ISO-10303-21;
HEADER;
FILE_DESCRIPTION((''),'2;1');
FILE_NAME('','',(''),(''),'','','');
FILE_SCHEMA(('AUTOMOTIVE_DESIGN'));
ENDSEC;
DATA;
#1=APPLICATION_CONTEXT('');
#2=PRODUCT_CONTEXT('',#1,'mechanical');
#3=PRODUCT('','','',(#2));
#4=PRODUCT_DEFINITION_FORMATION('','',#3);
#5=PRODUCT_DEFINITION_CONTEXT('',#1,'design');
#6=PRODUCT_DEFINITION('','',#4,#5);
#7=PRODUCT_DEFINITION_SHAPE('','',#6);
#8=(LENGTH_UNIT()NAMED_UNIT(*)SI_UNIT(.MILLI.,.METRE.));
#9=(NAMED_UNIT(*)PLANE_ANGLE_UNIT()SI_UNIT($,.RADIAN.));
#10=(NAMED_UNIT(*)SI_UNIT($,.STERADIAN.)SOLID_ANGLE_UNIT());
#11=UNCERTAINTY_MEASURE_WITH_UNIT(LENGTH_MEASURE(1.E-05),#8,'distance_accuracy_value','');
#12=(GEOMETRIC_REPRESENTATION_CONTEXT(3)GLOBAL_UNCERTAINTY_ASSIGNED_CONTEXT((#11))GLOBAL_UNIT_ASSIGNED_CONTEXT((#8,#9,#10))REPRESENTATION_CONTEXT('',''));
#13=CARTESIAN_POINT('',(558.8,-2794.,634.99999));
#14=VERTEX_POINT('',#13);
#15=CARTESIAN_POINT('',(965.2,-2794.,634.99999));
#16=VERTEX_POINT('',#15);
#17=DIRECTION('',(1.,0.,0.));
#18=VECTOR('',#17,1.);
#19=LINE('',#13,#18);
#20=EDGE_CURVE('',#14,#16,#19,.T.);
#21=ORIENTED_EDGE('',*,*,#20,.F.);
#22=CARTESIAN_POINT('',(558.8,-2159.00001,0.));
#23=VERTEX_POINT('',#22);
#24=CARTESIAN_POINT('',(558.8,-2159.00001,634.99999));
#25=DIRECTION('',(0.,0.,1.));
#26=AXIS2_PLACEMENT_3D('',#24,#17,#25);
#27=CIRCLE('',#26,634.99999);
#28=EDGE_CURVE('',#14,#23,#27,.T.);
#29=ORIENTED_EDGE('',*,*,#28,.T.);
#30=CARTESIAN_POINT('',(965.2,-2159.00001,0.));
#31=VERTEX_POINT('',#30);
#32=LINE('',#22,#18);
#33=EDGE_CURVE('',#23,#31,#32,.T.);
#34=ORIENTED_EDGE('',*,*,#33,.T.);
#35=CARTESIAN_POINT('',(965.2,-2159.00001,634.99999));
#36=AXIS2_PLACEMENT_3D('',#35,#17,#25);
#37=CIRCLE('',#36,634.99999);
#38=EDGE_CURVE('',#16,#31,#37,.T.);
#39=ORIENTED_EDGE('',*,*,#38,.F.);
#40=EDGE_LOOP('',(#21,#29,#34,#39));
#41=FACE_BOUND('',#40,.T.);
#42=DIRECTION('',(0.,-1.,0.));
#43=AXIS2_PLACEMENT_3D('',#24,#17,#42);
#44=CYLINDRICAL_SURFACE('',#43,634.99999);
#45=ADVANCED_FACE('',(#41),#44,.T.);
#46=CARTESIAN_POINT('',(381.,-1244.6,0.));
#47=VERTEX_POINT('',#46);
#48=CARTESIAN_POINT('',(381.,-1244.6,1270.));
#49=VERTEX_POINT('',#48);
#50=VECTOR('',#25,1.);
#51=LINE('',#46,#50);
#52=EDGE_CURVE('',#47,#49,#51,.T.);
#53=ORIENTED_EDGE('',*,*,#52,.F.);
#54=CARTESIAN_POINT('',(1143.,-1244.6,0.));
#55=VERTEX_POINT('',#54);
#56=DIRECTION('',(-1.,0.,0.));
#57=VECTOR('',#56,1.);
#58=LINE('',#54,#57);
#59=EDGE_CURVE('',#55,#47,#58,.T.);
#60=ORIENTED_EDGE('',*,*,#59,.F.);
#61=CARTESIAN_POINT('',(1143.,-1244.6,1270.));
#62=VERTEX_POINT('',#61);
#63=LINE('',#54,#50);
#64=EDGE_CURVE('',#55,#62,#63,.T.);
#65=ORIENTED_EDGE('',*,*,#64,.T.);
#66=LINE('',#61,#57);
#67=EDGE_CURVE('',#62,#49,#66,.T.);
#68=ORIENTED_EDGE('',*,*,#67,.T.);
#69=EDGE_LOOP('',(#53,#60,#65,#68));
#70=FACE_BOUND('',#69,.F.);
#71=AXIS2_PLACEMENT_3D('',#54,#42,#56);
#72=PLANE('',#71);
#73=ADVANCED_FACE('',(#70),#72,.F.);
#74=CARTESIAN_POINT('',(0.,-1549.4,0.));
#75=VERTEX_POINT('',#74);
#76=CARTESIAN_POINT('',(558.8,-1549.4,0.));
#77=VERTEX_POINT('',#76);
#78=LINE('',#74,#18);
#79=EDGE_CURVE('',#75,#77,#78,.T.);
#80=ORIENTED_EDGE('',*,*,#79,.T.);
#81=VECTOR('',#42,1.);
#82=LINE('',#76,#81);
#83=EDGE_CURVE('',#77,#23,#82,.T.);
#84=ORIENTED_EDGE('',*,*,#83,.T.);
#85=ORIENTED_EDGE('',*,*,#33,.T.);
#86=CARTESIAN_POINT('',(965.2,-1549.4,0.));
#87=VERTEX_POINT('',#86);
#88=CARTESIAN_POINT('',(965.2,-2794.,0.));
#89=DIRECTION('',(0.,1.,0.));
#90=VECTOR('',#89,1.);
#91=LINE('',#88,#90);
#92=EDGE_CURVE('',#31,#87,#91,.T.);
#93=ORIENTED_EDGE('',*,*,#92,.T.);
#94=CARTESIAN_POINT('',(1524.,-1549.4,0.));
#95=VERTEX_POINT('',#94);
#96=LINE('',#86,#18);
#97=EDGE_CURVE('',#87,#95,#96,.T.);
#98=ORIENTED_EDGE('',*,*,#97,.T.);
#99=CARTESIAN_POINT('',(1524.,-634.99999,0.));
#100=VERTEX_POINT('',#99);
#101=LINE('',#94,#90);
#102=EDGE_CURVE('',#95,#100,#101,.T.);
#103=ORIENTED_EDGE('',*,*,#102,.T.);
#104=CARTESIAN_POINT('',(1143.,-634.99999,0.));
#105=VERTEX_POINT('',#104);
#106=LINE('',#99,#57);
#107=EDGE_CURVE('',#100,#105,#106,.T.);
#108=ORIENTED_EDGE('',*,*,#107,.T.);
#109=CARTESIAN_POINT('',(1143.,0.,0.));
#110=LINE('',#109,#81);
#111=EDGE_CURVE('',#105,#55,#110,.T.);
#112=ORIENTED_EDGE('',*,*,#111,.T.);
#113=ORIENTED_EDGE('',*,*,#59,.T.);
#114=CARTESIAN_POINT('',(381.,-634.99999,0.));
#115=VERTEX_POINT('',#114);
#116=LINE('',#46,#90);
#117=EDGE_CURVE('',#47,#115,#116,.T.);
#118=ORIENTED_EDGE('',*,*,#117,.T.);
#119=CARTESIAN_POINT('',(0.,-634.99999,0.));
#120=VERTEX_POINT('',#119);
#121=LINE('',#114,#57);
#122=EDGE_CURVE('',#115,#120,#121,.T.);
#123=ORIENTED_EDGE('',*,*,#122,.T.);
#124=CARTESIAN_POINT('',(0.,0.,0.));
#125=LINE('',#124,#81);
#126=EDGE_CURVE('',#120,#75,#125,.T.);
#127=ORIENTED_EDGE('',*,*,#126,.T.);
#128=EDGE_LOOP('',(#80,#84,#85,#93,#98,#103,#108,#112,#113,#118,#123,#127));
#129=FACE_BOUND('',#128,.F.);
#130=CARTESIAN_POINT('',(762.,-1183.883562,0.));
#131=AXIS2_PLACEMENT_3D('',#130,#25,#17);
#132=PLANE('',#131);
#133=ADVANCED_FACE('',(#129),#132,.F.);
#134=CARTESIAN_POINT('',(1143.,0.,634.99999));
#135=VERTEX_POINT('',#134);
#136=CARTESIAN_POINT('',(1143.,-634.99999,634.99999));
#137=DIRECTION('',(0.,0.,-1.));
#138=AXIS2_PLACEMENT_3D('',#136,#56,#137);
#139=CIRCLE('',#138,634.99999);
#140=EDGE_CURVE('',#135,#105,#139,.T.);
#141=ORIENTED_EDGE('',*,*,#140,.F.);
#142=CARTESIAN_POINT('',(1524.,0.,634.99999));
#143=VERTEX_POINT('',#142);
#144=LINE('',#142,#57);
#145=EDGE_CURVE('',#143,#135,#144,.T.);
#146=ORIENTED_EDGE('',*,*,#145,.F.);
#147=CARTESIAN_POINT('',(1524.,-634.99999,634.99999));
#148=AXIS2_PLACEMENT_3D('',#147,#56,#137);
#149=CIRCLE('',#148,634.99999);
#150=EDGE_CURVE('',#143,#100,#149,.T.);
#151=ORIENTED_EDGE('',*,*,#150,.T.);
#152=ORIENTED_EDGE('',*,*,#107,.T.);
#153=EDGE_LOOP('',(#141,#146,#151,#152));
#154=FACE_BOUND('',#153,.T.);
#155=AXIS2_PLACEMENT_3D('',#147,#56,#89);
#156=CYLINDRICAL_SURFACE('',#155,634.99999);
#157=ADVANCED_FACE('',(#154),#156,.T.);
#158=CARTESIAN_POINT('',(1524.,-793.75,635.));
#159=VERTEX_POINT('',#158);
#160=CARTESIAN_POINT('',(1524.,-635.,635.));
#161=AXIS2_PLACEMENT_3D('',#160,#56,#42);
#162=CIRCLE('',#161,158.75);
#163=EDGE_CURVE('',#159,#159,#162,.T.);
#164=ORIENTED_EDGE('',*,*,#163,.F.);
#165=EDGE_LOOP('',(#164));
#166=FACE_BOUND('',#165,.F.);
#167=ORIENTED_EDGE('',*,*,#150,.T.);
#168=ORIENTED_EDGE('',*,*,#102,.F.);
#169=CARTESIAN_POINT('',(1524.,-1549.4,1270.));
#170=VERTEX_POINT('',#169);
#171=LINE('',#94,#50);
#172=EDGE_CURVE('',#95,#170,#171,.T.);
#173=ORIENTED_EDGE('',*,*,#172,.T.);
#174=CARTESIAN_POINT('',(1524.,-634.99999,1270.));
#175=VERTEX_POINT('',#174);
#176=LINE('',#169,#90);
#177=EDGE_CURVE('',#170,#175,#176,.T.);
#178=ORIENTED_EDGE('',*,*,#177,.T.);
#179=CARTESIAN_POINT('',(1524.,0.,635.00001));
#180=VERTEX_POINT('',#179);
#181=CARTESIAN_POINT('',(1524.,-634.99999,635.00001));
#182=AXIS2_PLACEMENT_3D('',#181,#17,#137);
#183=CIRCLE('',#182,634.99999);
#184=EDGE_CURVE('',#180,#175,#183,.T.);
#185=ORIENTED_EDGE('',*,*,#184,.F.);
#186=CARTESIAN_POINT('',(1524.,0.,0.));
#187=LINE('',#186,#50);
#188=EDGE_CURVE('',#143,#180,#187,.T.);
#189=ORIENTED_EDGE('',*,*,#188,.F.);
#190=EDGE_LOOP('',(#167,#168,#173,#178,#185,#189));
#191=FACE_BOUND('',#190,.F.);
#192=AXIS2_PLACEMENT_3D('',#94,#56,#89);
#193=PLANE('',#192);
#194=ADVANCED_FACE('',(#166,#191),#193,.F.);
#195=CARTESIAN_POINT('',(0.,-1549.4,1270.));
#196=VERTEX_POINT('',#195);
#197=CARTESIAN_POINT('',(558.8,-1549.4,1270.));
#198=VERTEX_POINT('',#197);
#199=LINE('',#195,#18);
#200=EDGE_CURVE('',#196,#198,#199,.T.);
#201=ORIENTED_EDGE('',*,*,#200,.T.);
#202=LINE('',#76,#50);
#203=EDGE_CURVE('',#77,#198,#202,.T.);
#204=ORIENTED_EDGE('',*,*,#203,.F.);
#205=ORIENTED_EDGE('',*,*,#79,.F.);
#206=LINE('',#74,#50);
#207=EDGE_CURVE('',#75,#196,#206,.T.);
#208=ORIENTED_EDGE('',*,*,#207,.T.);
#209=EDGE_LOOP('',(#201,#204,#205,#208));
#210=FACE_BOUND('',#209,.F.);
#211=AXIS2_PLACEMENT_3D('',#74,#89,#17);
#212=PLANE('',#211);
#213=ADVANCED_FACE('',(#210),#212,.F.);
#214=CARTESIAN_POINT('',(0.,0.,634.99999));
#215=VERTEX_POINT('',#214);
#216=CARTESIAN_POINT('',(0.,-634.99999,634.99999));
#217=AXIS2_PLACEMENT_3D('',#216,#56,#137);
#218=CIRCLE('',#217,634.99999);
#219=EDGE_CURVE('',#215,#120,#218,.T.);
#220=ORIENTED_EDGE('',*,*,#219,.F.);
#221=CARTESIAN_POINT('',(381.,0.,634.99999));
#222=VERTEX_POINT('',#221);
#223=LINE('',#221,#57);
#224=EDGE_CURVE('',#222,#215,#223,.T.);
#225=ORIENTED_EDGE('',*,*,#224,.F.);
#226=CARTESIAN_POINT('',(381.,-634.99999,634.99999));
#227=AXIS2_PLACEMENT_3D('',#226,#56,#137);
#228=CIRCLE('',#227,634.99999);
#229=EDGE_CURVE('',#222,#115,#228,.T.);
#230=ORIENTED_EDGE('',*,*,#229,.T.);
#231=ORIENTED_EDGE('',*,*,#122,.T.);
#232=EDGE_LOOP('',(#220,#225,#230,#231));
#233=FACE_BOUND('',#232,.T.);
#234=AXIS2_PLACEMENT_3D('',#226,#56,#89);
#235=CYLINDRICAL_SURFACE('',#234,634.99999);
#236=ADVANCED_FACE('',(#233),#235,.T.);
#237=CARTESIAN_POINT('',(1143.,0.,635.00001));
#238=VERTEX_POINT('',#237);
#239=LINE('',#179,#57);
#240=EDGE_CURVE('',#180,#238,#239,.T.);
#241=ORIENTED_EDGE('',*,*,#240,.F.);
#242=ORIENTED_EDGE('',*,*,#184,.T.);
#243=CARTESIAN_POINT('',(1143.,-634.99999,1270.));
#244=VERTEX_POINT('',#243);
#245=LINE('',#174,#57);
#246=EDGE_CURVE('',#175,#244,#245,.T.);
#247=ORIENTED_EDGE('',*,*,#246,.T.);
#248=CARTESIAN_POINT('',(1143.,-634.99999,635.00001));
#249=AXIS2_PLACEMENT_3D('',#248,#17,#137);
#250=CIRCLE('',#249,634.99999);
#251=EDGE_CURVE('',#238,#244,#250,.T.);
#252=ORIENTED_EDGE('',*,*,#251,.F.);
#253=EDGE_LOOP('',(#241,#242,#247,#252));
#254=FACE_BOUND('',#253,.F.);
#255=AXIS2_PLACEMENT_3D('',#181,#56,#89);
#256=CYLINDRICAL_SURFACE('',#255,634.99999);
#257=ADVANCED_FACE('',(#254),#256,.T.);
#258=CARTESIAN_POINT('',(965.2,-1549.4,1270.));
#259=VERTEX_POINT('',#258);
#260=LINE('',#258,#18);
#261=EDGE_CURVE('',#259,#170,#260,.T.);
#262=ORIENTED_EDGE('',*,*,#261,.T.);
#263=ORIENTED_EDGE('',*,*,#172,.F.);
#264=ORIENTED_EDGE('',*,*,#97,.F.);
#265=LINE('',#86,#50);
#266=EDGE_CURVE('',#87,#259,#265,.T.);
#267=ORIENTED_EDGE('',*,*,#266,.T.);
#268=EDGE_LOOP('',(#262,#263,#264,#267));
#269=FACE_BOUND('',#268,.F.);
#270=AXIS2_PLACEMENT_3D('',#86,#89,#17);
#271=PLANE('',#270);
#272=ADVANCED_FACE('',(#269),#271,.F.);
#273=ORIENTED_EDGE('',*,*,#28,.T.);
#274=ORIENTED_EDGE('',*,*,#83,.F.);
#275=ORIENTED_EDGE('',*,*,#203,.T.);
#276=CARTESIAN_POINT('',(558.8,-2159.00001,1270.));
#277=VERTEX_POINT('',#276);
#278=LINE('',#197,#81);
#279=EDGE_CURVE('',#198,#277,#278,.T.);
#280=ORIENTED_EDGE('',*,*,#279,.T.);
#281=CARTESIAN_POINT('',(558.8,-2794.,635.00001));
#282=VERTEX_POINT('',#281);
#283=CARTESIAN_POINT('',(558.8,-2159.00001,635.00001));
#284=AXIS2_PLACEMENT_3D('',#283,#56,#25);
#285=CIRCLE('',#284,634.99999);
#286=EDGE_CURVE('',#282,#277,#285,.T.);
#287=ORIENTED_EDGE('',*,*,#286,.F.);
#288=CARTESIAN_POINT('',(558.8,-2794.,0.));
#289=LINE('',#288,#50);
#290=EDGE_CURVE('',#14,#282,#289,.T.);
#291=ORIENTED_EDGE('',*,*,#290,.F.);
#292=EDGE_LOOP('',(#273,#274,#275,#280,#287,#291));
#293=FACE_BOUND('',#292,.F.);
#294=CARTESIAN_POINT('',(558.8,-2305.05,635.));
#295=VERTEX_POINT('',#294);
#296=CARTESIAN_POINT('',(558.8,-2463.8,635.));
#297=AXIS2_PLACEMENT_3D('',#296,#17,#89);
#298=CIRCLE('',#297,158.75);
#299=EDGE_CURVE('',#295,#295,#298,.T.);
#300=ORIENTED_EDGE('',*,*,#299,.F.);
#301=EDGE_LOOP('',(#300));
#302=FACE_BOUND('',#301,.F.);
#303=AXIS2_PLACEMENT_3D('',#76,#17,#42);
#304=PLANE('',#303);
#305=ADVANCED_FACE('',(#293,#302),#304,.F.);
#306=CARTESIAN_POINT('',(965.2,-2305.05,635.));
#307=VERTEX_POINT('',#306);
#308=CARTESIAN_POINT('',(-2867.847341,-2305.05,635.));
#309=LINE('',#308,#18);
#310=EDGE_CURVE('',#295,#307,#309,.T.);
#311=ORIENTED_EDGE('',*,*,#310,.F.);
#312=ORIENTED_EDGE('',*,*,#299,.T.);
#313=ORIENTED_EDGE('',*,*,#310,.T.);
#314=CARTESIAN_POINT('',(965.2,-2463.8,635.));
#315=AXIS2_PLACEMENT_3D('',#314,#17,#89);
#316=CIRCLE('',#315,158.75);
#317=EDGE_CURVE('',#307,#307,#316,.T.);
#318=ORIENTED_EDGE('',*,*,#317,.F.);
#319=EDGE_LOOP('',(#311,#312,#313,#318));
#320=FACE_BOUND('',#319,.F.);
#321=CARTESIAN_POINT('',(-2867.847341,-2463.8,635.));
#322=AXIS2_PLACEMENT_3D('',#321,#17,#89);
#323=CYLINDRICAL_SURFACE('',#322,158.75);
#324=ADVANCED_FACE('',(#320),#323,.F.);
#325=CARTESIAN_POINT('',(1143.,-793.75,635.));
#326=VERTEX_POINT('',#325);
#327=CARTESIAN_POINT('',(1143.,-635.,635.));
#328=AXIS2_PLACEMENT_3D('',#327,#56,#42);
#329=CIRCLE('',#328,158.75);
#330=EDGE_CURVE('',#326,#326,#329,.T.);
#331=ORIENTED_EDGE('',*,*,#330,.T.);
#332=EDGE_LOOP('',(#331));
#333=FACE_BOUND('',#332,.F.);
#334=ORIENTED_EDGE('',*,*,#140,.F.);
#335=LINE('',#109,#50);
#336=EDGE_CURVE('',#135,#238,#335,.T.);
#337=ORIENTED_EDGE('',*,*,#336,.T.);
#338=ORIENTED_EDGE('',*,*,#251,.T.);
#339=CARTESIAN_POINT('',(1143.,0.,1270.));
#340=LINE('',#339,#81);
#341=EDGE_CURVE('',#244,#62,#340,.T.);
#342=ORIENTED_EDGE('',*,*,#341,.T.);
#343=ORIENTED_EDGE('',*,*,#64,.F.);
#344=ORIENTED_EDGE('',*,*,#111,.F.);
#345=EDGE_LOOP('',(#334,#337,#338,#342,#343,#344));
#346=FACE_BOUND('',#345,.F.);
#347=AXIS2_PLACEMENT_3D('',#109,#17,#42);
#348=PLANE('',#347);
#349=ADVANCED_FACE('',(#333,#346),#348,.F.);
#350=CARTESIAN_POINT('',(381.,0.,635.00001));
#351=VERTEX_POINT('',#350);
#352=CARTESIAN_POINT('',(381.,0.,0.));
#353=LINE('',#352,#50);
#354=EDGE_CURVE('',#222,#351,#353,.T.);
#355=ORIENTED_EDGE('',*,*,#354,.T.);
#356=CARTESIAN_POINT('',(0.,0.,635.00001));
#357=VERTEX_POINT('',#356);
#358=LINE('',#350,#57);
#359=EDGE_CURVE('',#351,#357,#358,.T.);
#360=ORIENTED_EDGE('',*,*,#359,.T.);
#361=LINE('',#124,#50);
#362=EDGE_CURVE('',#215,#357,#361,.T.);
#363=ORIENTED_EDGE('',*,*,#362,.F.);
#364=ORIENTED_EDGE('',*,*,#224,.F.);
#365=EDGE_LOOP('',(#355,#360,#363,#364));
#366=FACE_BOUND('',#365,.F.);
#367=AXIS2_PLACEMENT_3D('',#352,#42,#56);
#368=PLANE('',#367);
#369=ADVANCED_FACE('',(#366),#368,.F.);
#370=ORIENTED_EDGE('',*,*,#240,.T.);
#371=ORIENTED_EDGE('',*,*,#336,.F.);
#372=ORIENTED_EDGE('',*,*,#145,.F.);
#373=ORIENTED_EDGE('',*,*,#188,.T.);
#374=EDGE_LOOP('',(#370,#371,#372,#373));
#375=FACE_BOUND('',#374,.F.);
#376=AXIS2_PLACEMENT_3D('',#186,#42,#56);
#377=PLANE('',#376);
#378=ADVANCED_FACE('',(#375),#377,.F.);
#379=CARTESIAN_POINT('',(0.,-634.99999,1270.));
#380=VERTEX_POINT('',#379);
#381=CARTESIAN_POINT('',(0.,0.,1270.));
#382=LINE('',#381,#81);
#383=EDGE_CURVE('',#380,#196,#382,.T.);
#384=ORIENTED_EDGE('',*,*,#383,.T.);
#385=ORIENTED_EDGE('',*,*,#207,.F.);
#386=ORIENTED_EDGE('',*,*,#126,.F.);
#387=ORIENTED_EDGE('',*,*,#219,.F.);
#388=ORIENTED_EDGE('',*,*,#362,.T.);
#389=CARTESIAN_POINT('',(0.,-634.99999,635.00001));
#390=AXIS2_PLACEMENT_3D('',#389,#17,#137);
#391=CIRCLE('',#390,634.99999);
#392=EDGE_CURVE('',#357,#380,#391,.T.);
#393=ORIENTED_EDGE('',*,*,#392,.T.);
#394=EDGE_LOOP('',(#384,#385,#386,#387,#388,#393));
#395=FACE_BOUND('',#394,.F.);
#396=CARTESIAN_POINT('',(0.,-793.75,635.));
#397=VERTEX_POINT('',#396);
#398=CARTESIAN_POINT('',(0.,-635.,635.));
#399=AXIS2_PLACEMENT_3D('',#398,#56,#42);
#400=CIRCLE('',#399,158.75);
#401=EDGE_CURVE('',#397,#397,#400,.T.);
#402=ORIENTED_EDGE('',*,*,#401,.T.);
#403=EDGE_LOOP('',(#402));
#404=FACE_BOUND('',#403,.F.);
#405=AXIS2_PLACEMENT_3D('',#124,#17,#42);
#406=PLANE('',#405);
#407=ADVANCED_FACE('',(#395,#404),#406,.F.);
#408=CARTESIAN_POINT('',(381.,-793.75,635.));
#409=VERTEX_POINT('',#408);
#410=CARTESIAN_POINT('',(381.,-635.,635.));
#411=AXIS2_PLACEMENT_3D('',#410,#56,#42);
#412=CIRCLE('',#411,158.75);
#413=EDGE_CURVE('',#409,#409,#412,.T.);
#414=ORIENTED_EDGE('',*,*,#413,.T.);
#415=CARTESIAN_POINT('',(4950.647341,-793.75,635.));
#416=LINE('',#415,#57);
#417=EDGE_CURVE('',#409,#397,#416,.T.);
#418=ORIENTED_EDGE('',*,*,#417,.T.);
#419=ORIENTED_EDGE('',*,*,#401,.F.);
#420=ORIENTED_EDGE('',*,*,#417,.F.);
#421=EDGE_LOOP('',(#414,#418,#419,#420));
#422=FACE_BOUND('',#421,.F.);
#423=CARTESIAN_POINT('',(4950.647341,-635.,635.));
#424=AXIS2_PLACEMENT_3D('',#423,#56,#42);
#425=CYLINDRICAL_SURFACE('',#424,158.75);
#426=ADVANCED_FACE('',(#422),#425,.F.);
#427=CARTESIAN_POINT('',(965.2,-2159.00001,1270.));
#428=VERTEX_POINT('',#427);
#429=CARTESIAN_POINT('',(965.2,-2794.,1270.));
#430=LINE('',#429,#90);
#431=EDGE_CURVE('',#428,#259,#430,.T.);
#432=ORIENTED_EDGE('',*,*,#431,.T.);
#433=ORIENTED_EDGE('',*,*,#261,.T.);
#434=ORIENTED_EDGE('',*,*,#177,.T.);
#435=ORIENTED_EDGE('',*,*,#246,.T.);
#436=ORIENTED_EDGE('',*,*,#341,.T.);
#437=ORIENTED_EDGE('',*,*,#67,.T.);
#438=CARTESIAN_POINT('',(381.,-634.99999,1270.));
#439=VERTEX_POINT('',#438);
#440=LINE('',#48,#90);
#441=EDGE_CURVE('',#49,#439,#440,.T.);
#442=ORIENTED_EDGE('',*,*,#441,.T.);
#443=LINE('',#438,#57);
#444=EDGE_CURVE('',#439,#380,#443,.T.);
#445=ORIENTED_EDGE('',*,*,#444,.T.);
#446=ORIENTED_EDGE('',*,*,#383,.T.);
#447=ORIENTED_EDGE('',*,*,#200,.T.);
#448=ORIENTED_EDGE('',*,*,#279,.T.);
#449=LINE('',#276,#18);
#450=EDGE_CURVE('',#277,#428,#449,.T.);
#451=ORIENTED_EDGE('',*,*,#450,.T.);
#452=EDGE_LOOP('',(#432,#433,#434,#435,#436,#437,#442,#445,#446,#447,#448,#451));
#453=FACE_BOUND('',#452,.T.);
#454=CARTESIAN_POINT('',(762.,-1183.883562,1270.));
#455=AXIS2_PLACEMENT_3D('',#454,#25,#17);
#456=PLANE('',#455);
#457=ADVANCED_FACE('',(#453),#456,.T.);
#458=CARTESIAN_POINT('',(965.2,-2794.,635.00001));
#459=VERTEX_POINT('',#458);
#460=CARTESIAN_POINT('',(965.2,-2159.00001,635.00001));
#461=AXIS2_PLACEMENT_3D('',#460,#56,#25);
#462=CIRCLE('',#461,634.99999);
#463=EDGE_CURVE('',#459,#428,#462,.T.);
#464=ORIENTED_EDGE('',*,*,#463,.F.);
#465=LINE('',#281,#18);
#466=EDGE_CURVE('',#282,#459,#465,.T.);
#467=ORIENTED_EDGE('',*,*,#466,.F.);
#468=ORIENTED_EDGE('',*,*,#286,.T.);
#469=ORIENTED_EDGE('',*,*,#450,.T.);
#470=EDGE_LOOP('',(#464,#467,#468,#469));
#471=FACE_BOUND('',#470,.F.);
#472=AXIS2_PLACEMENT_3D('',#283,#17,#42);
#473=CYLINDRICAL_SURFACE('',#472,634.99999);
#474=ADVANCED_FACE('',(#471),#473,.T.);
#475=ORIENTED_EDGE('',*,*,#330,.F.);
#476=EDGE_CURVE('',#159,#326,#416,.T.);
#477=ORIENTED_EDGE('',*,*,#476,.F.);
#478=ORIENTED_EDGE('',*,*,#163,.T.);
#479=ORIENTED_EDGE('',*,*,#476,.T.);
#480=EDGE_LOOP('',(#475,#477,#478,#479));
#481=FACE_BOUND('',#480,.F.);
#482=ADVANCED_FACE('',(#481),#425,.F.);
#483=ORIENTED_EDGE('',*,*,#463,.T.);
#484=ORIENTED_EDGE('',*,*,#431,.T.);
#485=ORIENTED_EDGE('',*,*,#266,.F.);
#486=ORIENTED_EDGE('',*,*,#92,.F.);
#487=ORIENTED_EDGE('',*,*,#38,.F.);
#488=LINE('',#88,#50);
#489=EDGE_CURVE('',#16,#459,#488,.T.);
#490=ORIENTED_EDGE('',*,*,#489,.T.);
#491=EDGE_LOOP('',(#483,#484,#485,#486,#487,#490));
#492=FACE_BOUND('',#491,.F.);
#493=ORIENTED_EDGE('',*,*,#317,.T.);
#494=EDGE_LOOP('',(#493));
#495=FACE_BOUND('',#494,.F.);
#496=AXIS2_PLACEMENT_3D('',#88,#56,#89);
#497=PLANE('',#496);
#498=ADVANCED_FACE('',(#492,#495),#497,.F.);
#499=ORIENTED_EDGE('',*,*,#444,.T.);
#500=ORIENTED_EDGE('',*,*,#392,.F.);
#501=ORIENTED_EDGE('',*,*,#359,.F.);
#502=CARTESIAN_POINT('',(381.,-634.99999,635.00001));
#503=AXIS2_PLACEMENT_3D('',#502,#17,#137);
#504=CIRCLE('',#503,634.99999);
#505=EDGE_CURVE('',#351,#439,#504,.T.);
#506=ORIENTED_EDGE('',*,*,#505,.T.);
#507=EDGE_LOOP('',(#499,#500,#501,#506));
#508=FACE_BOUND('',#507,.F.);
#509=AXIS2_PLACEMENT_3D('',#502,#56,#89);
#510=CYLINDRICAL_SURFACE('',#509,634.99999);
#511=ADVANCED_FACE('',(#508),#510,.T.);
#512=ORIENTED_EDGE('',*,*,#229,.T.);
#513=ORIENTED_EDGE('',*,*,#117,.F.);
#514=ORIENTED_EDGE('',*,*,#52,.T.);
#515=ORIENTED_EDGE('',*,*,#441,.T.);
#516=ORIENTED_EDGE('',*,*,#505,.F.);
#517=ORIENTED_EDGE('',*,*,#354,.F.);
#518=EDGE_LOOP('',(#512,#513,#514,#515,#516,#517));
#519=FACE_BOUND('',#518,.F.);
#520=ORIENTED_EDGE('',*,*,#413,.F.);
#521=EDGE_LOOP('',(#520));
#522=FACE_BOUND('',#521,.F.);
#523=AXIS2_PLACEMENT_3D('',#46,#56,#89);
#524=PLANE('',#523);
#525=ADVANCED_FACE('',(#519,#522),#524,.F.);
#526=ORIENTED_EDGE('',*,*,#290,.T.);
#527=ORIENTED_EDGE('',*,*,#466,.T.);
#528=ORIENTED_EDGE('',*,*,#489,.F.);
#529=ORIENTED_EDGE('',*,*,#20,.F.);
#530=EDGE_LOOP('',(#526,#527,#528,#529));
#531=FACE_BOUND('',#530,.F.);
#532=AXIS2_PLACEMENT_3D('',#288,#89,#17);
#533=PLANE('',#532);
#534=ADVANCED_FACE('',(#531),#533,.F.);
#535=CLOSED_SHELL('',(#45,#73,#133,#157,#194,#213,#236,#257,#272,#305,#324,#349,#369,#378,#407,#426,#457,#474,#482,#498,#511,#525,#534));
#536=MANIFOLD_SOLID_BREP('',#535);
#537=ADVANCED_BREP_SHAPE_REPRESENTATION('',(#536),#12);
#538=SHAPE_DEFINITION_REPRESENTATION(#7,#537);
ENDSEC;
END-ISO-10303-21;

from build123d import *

# Parameters (mm, degrees)
F1_DEPTH = 1270
F2_R     = 634.99999
F4_D     = 317.5
F6_D     = 317.5


# Not quite as in the source:
# - a fillet or chamfer is up to 0.001 mm smaller than in the source, because OpenCascade refuses the exact size


with BuildPart() as f1:
    # F0 (on Top) → F1 (new body)
    with BuildSketch(Plane.XY):
        Polygon((381, 0), (0, 0), (0, -1549.4), (558.8, -1549.4), (558.8, -2794), (965.2, -2794), (965.2, -1549.4), (1524, -1549.4), (1524, 0), (1143, 0), (1143, -1244.6), (381, -1244.6), align=None)
    extrude(amount=F1_DEPTH)

    # F2 (radius 635 in the source; OpenCascade refuses exactly that, so slightly less here)
    f2_edges = [f1.edges().sort_by_distance(p)[0] for p in [
        (190.5, 0, 1270),
        (190.5, 0, 0),
        (1333.5, 0, 1270),
        (1333.5, 0, 0),
        (762, -2794, 1270),
        (762, -2794, 0),
    ]]
    fillet(f2_edges, radius=F2_R)

    # F4 (through all)
    with Locations(Plane(origin=(558.8, 0, 0), x_dir=(0, -1, 0), z_dir=(-1, 0, 0))):
        with Locations((2463.8, 635)):
            Hole(F4_D / 2)

    # F6 (through all)
    with Locations(Plane.YZ.offset(1524)):
        with Locations((-635, 635)):
            Hole(F6_D / 2)


solid = f1.part
